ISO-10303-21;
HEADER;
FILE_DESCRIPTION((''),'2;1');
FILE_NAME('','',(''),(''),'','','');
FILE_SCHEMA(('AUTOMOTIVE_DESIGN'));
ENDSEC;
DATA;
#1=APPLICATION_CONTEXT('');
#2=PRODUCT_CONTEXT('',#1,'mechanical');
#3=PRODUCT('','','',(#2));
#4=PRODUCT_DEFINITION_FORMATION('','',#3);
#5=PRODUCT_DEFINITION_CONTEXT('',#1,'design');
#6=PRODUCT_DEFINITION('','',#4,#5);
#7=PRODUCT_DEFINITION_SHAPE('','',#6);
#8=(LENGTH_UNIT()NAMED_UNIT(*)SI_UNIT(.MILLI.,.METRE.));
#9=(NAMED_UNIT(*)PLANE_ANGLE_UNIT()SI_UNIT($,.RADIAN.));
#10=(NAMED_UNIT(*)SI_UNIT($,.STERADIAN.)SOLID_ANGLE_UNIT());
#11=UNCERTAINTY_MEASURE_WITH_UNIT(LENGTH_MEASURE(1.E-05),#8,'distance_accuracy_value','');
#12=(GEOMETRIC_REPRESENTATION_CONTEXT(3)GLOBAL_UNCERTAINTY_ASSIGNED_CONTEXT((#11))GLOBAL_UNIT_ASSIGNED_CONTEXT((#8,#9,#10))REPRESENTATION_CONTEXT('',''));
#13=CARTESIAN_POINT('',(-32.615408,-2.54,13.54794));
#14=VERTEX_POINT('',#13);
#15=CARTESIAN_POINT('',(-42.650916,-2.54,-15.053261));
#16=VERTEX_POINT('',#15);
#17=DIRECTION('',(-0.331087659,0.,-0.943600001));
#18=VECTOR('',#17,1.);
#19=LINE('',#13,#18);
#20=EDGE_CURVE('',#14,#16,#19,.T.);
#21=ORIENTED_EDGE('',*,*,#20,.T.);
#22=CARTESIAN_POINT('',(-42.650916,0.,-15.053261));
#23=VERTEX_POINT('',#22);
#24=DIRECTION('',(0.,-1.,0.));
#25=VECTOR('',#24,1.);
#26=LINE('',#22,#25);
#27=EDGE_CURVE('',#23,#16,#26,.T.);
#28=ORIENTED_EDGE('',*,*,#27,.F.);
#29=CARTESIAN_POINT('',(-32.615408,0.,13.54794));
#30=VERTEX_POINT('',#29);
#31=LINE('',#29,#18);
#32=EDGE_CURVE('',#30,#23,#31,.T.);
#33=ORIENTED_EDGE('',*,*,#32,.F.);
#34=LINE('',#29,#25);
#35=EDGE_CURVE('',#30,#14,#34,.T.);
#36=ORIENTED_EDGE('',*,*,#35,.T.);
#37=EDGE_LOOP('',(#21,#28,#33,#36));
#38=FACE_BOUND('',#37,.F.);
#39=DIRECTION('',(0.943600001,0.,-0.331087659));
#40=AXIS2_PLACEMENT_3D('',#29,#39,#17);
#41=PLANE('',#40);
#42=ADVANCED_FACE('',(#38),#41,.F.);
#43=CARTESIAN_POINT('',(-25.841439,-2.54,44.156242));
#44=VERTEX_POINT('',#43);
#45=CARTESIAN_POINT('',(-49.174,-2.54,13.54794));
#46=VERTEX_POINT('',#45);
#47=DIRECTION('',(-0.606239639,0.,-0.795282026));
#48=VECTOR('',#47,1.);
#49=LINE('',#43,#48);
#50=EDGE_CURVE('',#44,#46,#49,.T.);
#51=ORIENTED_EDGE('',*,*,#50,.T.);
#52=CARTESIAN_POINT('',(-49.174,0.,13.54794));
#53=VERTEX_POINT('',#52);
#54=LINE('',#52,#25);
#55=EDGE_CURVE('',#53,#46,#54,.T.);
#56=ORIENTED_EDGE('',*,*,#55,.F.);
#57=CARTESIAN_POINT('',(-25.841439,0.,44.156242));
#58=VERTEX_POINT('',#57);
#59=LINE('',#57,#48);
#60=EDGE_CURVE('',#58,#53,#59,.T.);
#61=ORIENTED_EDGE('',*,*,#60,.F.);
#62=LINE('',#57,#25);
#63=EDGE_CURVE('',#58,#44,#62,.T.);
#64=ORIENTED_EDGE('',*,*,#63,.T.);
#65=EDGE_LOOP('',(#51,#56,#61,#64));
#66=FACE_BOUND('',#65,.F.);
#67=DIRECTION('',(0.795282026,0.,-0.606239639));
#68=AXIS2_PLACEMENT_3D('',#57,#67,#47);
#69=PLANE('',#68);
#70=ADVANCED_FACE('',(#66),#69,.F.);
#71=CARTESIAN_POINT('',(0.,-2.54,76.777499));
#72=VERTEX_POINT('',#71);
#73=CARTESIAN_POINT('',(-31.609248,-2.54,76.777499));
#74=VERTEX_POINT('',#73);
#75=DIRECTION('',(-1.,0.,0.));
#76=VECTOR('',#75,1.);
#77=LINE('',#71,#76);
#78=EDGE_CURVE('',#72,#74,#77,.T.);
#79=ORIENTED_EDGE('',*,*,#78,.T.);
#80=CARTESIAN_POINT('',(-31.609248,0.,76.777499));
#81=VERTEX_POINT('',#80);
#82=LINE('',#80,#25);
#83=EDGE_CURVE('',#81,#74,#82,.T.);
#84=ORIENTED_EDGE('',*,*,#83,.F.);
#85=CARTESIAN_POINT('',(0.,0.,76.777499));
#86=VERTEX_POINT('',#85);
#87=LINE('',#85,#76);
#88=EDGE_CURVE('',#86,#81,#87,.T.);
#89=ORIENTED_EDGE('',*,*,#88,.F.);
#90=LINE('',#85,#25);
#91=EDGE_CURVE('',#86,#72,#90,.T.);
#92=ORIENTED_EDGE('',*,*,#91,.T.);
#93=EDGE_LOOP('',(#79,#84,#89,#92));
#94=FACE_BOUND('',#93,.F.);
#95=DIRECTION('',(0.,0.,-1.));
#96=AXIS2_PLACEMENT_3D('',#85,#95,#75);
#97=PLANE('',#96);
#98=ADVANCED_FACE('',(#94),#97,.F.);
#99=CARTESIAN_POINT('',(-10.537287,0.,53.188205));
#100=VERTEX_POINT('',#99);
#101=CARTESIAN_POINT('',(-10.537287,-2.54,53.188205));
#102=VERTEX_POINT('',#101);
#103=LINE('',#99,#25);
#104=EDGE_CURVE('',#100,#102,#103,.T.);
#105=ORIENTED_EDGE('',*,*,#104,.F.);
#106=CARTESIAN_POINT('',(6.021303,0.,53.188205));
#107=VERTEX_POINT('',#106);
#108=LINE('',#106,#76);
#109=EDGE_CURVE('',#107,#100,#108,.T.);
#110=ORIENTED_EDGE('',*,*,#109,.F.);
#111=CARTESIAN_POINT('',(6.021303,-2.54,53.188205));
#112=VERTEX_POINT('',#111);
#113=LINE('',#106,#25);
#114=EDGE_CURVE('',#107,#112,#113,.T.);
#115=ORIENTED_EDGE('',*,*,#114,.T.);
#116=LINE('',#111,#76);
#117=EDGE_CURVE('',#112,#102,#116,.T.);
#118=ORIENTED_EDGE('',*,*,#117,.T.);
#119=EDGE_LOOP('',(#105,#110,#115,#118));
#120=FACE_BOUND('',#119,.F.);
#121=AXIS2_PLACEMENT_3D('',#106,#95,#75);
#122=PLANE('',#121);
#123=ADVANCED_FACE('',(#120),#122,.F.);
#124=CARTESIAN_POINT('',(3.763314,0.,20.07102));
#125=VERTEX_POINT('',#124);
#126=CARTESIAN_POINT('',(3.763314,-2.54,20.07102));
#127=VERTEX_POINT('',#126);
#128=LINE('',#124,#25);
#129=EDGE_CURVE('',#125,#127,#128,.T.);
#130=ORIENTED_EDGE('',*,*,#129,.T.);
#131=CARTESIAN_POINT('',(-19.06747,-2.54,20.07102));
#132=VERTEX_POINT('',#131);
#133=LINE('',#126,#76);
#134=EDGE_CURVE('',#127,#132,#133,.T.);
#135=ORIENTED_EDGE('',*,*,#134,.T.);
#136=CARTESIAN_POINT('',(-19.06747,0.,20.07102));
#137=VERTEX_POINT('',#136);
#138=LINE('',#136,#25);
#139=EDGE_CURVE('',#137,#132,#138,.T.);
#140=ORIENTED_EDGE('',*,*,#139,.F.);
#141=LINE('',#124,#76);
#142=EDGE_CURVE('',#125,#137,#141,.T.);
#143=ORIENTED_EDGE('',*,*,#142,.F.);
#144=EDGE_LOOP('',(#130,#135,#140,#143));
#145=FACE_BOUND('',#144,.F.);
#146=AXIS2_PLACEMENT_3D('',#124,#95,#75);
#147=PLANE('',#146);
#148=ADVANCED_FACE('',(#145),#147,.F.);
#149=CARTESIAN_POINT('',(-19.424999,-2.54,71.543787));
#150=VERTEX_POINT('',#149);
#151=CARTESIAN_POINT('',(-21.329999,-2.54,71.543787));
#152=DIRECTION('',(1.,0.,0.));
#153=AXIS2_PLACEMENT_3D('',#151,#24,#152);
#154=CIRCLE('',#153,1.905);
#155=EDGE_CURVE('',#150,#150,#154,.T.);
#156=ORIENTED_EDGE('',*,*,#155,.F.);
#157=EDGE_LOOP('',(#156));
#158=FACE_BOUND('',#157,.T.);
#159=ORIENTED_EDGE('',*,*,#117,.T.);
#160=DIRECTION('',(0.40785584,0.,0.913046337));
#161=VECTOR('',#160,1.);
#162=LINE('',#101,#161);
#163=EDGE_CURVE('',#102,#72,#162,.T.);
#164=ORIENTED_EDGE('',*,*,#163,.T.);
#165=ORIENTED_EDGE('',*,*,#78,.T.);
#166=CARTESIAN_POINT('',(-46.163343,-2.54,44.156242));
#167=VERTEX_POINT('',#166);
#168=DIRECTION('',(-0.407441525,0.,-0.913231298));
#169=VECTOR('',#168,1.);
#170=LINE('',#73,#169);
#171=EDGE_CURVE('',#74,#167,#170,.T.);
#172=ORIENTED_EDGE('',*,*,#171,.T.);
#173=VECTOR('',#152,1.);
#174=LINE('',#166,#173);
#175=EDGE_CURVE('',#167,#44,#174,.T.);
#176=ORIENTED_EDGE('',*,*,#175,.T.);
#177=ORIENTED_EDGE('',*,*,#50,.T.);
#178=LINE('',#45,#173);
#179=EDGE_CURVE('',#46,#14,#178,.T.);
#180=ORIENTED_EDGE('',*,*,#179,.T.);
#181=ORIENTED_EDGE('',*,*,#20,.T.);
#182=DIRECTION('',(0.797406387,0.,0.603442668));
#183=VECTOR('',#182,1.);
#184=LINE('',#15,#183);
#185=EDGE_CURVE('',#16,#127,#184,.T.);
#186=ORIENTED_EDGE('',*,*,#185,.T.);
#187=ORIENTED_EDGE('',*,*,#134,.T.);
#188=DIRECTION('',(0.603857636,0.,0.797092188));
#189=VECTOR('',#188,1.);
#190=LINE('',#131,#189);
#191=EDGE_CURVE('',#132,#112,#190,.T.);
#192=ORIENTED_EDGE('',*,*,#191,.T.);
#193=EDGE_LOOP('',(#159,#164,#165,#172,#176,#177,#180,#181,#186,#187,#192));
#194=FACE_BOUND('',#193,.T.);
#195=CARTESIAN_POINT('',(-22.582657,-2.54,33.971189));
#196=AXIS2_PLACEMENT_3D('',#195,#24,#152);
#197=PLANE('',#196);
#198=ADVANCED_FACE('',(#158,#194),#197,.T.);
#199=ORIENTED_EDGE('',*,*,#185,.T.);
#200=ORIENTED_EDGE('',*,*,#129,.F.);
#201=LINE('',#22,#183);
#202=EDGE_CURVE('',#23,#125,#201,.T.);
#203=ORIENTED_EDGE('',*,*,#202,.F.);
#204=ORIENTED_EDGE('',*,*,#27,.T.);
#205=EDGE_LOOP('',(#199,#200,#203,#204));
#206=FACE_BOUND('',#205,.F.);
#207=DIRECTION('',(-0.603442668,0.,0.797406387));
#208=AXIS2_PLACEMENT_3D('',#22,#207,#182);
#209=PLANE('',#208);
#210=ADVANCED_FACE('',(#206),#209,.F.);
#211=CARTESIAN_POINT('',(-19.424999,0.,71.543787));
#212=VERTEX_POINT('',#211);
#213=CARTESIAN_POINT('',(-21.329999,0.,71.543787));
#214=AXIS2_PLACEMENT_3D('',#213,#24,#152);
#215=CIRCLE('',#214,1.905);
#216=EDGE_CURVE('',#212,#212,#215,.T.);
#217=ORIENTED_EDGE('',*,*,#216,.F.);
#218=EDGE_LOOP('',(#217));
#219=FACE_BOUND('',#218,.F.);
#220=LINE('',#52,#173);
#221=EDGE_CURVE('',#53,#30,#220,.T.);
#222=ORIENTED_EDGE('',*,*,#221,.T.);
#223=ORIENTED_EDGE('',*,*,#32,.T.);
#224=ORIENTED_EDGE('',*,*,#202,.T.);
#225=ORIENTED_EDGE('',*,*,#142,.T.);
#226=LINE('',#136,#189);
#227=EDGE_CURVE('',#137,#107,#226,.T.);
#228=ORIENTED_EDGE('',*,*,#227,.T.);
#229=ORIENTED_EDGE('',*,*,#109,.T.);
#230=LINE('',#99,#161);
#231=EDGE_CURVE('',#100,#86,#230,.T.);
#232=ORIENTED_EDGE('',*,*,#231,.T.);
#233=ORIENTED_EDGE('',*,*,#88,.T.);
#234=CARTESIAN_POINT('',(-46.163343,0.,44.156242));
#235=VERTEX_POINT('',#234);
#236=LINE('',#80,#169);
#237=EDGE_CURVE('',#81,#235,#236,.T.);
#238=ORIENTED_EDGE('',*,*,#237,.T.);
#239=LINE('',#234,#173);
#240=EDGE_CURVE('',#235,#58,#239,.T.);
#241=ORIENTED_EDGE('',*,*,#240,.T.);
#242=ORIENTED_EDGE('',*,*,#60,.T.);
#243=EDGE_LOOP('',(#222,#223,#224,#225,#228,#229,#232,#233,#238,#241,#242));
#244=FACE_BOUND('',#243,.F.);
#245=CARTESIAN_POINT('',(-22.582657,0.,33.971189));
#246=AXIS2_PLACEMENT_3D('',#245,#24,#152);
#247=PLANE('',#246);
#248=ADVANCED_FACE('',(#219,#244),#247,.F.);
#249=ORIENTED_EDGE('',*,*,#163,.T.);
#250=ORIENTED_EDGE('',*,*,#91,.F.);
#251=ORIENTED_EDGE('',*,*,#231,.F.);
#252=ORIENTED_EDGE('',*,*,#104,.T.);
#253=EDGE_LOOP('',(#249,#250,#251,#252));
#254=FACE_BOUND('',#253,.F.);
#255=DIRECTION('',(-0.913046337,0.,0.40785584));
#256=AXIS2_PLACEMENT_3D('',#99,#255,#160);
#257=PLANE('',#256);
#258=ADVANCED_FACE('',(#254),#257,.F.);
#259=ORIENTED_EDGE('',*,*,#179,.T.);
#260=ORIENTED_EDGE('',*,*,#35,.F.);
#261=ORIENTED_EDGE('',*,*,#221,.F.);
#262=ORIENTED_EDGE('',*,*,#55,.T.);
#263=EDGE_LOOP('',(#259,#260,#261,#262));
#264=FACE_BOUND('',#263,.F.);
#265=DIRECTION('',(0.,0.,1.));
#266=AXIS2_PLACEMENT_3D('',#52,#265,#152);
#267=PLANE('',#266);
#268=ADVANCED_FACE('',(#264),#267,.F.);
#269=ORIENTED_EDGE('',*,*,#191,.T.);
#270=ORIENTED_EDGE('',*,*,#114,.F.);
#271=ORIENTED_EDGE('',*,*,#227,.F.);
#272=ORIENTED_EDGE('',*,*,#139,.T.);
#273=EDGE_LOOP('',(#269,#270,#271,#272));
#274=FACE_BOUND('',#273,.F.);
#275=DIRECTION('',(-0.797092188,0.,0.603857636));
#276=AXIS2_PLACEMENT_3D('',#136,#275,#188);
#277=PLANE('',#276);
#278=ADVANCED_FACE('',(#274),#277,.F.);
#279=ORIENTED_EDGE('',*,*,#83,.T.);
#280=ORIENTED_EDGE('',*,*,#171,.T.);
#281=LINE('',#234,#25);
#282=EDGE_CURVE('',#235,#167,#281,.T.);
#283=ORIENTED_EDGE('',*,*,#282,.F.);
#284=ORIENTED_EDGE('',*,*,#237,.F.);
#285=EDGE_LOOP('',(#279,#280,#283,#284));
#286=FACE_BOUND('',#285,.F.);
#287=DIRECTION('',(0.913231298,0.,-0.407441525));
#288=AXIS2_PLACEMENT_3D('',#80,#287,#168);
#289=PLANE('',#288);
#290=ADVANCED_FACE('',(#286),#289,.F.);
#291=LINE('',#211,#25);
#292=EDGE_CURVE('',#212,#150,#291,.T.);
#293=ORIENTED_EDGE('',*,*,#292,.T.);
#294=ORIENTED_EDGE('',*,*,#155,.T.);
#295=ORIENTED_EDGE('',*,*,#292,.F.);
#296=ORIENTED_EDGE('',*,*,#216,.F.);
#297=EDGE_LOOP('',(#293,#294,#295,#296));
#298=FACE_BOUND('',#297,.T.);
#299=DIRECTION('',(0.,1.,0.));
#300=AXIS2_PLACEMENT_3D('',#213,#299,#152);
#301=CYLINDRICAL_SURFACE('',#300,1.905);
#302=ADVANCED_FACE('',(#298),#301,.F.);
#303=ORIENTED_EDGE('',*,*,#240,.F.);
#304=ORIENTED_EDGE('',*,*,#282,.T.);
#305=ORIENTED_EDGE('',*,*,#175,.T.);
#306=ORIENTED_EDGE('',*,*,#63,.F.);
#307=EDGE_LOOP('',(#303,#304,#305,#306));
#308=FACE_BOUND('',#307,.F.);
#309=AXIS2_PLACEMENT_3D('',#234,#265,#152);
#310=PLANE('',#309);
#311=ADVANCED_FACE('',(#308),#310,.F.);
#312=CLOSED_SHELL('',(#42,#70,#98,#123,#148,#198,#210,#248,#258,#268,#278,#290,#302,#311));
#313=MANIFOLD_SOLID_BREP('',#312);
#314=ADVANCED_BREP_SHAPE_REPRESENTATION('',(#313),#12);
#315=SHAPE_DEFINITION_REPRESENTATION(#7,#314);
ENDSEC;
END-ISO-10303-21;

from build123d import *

# Parameters (mm, degrees)
F0_R     = 1.905
F1_DEPTH = 2.54
F2_DEPTH = 152


# Not quite as in the source:
# - an extrude ends at something that could not be found from the text; its depth is read off the source's solid


with BuildPart() as f1:
    # F0 (on Front) → F1 (new body)
    with BuildSketch(Plane.XZ):
        Polygon((-10.5372872204, 53.1882047653), (0, 76.7774991782), (-31.6092483094, 76.7774991782), (-46.1633428931, 44.156242162), (-25.8414391428, 44.156242162), (-49.1739995778, 13.5479401797), (-32.6154083014, 13.5479401797), (-42.6509156823, -15.0532610714), (3.763313638, 20.0710203499), (-19.0674699843, 20.0710203499), (6.0213026591, 53.1882047653), align=None)
        with Locations((-21.3299991501, 71.5437866839)):
            Circle(F0_R, mode=Mode.SUBTRACT)
    extrude(amount=F1_DEPTH)

    # F0 (on Front) → F2 (cut, through all)
    with BuildSketch(Plane.XZ):
        with Locations((-21.3299991501, 71.5437866839)):
            Circle(F0_R)
    extrude(amount=-F2_DEPTH, mode=Mode.SUBTRACT)


solid = f1.part
